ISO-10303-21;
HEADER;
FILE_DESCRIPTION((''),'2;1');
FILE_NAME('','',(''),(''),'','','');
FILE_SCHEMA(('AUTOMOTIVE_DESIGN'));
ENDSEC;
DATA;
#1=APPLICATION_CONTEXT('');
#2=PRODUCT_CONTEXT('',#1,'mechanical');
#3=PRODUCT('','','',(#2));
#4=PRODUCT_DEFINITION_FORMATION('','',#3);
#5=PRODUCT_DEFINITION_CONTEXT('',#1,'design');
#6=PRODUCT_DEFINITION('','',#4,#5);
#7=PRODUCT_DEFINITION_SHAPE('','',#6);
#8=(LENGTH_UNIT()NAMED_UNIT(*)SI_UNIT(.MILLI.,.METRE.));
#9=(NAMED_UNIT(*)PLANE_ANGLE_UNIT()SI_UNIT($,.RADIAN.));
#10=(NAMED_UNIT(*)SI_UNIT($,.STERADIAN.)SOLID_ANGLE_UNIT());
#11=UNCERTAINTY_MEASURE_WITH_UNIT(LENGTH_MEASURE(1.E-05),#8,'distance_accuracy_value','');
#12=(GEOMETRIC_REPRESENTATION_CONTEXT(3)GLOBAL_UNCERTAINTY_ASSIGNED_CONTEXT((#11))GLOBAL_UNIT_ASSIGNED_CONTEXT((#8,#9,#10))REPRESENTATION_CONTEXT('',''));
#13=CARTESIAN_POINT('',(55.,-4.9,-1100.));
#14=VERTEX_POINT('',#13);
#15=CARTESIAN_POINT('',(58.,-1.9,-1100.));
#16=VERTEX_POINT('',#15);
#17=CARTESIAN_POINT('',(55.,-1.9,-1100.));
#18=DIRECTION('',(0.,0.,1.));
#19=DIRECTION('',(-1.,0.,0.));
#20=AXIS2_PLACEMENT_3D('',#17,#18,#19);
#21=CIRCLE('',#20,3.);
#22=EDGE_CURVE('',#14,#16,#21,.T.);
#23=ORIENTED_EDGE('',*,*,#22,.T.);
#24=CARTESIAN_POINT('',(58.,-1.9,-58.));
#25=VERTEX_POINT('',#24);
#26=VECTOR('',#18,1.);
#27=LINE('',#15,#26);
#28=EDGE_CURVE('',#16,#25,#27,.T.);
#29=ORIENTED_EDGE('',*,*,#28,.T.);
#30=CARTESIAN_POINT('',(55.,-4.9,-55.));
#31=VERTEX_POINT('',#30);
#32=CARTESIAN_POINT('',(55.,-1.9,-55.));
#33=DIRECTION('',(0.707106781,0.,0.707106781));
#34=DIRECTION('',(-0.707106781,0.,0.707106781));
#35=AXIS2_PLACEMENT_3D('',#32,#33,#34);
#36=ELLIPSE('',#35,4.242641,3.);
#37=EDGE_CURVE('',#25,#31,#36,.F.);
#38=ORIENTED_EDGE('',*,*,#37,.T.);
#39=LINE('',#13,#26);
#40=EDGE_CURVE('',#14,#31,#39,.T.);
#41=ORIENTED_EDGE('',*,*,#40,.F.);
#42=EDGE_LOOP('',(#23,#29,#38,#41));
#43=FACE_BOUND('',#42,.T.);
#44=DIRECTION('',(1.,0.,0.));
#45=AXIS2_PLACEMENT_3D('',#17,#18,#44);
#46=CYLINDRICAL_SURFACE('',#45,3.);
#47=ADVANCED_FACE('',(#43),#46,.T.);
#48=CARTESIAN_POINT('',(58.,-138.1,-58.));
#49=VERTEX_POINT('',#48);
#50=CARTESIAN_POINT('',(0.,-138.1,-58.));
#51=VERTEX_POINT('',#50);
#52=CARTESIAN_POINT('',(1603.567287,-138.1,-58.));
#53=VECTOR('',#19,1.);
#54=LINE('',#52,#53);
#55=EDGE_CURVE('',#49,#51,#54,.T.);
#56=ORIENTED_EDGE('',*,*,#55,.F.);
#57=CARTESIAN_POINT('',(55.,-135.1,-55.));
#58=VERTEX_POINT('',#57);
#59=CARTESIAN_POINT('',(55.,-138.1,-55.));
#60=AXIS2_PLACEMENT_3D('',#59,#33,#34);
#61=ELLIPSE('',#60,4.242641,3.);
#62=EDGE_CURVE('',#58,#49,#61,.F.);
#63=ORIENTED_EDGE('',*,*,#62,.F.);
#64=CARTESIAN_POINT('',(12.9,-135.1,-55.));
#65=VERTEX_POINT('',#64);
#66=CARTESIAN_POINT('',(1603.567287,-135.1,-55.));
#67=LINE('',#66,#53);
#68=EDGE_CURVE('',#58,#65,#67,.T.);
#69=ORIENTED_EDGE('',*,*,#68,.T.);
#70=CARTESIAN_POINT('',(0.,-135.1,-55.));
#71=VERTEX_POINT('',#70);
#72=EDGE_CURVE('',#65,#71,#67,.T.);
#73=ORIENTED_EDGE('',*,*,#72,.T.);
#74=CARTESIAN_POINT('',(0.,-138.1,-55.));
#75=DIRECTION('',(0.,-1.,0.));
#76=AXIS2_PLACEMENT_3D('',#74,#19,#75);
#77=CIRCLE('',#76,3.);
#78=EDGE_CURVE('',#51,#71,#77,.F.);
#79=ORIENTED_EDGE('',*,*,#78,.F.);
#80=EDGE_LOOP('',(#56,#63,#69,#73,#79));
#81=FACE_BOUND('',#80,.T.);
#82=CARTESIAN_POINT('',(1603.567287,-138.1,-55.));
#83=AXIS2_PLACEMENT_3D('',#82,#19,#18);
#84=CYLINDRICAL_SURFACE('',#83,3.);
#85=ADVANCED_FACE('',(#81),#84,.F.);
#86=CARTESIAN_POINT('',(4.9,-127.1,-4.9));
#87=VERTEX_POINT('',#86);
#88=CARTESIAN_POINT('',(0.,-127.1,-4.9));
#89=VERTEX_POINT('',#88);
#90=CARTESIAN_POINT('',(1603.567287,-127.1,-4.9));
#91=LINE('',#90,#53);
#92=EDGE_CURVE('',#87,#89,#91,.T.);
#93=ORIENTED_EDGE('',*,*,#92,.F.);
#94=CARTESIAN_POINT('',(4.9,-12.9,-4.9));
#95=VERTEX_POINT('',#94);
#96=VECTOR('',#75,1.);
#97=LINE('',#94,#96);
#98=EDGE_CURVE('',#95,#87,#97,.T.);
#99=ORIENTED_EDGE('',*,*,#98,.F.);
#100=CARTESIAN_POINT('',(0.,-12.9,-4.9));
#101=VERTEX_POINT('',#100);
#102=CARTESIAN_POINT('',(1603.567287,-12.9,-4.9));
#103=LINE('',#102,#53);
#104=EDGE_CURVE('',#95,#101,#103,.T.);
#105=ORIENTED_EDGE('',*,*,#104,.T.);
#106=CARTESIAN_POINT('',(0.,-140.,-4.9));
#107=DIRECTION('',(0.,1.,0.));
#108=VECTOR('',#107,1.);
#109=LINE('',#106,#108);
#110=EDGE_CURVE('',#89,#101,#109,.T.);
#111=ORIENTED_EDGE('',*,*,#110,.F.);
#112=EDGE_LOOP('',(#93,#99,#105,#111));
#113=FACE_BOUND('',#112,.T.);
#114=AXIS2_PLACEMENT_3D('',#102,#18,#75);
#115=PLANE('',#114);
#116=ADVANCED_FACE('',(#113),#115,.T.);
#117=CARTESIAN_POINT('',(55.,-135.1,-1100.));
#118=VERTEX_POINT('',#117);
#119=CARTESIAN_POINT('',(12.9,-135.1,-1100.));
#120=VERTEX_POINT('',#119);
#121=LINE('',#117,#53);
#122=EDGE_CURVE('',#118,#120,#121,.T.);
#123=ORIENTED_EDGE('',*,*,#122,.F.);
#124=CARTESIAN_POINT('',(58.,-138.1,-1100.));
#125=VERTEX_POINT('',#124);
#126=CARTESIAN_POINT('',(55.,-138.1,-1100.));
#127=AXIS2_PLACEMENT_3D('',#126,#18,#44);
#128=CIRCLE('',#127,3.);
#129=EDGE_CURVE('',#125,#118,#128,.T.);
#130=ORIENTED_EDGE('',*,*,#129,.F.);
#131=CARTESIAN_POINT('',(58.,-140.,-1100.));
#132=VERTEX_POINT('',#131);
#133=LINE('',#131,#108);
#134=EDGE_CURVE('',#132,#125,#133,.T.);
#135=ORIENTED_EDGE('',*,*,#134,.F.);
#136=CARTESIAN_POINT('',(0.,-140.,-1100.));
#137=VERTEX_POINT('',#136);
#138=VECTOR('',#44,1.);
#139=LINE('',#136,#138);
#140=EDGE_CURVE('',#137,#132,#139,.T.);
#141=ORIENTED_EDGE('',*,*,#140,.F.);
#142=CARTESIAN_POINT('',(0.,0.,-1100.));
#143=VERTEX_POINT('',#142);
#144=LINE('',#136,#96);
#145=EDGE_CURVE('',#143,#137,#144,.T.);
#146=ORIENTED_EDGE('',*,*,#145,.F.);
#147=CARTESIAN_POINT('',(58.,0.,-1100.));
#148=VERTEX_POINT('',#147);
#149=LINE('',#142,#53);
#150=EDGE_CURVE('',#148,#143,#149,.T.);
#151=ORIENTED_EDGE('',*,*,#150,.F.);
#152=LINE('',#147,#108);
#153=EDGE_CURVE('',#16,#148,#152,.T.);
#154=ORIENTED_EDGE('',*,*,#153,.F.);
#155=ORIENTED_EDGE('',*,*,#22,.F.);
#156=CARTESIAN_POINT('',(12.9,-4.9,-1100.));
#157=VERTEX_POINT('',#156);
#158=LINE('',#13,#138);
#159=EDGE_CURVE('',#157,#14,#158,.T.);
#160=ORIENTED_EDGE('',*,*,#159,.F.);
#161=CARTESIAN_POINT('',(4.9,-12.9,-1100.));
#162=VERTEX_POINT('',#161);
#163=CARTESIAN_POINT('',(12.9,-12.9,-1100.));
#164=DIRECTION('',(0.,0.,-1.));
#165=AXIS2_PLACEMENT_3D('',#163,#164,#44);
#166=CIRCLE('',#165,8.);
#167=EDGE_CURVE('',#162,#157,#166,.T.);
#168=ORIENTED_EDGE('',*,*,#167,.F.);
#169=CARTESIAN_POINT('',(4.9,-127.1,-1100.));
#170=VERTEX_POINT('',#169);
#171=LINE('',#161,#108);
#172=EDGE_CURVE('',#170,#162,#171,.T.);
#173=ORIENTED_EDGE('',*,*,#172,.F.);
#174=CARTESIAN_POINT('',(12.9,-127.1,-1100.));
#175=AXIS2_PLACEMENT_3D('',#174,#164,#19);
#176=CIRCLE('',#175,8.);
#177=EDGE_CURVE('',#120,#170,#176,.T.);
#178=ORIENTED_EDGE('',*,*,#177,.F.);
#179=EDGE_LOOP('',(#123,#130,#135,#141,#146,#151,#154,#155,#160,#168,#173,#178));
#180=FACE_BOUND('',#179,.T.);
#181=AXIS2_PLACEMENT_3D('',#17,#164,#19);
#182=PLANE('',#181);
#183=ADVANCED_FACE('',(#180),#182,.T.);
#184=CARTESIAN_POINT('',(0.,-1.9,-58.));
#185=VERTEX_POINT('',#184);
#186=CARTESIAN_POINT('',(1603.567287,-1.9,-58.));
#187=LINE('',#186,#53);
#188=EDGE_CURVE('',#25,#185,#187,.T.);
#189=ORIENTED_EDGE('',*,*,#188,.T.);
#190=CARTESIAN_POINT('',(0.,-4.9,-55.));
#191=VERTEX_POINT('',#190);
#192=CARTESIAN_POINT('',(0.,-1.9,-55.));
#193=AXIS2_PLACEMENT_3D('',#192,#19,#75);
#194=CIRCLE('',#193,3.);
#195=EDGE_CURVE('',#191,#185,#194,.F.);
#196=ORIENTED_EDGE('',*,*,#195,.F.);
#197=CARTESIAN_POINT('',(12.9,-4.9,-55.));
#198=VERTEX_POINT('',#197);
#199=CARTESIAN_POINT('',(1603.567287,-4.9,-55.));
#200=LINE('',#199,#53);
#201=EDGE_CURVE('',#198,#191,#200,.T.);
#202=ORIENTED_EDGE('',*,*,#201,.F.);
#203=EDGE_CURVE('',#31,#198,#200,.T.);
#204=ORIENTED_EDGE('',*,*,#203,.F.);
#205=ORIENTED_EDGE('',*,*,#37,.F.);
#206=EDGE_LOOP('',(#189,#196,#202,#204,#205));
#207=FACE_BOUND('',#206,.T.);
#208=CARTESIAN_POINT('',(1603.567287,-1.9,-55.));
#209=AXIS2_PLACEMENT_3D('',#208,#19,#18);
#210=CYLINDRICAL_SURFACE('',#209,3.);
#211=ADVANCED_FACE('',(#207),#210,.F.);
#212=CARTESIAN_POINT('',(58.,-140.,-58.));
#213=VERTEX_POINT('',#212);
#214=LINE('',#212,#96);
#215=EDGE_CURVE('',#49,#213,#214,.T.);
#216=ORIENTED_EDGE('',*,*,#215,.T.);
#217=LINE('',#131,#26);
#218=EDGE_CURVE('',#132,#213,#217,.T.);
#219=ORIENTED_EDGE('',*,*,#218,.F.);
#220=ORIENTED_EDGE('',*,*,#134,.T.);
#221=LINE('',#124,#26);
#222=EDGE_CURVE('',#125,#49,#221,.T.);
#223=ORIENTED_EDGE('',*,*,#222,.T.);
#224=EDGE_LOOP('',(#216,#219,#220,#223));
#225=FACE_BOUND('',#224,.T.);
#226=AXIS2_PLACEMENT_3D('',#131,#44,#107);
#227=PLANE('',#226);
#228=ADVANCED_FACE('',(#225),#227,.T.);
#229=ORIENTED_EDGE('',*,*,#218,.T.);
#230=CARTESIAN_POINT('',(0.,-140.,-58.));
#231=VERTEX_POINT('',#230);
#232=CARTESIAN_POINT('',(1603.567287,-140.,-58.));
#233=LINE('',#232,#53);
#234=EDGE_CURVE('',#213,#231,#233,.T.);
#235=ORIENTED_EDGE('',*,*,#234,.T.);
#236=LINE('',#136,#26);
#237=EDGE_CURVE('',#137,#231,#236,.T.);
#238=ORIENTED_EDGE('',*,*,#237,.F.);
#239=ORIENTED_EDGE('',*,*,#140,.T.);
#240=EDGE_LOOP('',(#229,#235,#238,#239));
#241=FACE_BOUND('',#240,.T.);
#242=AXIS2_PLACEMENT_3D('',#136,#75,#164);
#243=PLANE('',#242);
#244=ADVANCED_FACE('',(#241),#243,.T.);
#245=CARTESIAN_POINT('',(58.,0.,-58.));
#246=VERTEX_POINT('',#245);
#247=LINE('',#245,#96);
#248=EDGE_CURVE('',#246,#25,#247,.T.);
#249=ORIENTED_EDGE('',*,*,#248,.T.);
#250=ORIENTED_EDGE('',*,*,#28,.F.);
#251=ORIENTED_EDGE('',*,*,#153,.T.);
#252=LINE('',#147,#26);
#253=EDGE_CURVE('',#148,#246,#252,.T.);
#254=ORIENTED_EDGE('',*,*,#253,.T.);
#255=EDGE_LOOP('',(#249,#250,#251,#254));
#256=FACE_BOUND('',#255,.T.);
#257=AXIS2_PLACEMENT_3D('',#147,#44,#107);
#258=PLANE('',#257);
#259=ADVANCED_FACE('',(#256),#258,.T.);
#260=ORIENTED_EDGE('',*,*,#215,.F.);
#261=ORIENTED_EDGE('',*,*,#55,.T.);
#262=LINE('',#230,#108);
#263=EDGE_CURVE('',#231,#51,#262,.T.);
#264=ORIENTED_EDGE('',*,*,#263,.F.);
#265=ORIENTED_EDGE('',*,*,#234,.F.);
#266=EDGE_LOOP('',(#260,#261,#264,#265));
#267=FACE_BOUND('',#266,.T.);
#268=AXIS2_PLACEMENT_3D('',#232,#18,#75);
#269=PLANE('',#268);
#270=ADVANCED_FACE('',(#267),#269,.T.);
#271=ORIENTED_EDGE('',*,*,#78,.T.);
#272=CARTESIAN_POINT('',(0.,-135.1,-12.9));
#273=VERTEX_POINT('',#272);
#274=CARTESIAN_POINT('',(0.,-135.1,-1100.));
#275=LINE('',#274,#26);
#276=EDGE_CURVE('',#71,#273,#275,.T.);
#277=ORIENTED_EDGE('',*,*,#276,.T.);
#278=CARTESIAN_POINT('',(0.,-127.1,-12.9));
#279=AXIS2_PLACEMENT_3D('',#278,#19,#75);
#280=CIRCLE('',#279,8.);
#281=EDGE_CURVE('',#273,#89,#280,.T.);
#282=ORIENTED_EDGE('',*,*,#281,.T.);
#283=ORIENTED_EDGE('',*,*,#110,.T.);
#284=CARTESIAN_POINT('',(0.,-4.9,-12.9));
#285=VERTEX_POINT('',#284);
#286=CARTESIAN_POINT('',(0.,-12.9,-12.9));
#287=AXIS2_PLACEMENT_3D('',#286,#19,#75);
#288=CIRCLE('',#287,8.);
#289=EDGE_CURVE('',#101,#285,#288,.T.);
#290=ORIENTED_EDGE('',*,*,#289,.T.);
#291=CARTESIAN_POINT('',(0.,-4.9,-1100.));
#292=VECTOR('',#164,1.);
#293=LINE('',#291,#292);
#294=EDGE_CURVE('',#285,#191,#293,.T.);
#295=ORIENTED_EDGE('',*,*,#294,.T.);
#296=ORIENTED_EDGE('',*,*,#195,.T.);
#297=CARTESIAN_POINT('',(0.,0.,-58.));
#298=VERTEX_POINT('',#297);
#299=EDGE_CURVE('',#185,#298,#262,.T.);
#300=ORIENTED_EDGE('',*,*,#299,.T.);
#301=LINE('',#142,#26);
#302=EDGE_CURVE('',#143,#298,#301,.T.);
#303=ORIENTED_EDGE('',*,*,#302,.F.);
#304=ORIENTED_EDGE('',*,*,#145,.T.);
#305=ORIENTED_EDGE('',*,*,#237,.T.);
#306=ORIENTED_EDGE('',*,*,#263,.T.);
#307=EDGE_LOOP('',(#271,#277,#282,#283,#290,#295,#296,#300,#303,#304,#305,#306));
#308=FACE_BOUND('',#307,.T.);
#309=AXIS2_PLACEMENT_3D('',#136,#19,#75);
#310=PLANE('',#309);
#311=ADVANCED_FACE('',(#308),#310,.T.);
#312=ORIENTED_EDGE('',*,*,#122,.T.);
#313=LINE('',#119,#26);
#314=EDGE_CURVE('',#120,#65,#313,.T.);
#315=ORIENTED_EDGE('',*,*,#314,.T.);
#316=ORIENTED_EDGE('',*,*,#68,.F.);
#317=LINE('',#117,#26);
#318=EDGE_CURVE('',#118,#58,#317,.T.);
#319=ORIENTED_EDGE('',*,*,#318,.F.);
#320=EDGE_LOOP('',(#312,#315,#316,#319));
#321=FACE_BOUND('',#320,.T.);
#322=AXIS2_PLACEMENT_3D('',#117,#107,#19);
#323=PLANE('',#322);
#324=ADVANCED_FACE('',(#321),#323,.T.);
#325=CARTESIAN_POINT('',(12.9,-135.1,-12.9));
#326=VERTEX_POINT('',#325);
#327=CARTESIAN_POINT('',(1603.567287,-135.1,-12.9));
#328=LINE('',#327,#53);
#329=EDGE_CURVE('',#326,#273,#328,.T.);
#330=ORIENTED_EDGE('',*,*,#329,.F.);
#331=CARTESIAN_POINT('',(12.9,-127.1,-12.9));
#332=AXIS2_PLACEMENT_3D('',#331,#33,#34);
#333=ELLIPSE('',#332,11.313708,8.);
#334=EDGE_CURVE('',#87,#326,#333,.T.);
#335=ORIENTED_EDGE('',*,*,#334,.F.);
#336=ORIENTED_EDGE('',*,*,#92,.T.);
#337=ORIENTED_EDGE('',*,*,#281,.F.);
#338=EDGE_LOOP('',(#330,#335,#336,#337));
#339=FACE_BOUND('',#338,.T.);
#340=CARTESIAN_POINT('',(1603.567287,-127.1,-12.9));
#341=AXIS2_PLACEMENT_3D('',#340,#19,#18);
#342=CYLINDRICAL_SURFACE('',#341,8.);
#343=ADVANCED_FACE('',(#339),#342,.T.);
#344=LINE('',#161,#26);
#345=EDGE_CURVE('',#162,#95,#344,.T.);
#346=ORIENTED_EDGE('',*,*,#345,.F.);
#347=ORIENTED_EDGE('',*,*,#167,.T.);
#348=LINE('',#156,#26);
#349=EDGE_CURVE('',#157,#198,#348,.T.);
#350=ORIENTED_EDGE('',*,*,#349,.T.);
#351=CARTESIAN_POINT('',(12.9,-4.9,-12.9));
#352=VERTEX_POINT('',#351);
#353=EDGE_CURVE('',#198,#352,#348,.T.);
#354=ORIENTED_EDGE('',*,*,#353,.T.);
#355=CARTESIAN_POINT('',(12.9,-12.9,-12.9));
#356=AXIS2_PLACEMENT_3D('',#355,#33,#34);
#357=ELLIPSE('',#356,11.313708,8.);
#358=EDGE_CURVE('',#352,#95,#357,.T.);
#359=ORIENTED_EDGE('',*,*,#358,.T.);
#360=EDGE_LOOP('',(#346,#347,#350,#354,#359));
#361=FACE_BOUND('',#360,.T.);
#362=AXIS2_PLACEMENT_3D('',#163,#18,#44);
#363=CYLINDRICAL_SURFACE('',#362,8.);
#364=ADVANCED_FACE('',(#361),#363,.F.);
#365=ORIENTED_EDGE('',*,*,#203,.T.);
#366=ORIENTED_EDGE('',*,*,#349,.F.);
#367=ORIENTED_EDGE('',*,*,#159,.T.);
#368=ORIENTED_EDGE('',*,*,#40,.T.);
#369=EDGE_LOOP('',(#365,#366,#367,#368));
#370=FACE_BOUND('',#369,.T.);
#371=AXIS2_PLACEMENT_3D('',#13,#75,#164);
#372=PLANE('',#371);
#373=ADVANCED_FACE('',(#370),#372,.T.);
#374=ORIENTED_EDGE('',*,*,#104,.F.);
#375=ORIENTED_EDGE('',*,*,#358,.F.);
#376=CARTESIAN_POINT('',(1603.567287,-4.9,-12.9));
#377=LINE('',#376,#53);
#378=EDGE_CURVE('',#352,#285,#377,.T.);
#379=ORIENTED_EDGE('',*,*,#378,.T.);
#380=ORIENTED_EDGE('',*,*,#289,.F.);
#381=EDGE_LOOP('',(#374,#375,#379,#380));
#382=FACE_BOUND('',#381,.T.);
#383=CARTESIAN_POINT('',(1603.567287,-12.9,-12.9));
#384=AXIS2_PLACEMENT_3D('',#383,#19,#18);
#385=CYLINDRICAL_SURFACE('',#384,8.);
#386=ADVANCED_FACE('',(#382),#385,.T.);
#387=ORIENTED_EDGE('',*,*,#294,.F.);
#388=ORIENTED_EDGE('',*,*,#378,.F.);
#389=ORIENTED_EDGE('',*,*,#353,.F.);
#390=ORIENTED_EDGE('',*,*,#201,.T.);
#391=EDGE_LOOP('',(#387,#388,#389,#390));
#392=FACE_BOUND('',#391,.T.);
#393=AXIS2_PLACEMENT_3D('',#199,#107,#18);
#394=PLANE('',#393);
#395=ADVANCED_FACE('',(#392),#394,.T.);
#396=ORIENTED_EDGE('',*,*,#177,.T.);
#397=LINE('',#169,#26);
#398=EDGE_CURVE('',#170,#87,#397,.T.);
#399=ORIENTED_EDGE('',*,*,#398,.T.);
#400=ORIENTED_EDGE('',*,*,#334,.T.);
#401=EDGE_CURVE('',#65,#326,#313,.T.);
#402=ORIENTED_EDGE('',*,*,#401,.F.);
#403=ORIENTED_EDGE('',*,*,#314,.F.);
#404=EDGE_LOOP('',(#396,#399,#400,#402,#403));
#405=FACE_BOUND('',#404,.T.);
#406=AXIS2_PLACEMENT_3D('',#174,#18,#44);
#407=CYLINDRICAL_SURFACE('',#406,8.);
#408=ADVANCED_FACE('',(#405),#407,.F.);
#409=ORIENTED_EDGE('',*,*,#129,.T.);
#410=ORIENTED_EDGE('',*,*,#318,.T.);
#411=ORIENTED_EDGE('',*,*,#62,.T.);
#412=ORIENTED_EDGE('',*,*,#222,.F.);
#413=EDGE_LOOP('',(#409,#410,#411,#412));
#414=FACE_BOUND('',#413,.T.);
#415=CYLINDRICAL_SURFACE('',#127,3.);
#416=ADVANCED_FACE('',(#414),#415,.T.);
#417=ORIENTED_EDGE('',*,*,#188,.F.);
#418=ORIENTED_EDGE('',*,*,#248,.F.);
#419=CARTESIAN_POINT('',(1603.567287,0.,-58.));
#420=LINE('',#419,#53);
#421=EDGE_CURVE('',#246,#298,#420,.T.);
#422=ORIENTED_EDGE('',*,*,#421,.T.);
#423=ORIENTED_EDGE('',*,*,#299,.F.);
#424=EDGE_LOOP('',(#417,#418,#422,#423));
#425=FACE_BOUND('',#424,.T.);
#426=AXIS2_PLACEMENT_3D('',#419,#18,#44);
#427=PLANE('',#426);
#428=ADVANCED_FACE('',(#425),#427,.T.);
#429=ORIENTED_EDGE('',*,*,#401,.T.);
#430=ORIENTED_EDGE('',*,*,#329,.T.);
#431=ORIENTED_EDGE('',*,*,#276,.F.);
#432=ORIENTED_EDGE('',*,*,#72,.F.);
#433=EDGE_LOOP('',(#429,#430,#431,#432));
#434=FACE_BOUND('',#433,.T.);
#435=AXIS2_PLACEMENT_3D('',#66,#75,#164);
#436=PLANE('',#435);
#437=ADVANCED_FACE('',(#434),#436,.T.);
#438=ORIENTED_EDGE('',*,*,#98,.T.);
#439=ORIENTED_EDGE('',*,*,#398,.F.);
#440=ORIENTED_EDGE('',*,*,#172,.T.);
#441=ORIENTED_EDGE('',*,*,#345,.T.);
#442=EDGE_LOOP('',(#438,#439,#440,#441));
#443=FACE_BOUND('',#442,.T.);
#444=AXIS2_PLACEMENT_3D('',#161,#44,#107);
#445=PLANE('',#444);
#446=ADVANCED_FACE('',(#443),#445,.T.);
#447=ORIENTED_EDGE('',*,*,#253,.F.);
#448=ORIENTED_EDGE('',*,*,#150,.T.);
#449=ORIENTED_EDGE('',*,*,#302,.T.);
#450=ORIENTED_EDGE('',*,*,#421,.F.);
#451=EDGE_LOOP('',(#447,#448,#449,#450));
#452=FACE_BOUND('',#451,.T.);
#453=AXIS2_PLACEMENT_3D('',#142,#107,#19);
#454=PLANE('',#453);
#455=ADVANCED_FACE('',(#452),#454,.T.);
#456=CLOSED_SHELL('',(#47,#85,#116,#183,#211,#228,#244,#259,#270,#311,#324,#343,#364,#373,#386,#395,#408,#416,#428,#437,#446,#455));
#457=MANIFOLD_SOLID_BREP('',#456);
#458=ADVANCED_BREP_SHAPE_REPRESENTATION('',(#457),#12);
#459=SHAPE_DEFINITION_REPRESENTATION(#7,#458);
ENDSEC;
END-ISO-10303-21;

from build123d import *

# Parameters (mm, degrees)
EXTRUDE_1_DEPTH = 1100
OTHER_1_DEPTH   = 58


# Read off the part's stored shape, not the designer's step: Полость1
with BuildPart() as part:
    # Эскиз1 → Бобышка-Вытянуть1 (new body)
    with BuildSketch(Plane.XY):
        with BuildLine():
            Line((0, -140), (0, 0))
            Line((0, 0), (58, 0))
            Line((58, 0), (58, -1.9))
            ThreePointArc((58, -1.9), (57.121320344, -4.021320344), (55, -4.9))
            Line((55, -4.9), (12.9, -4.9))
            ThreePointArc((12.9, -4.9), (7.243145751, -7.243145751), (4.9, -12.9))
            Line((4.9, -12.9), (4.9, -127.1))
            ThreePointArc((4.9, -127.1), (7.243145751, -132.756854249), (12.9, -135.1))
            Line((12.9, -135.1), (55, -135.1))
            ThreePointArc((55, -135.1), (57.121320344, -135.978679656), (58, -138.1))
            Line((58, -138.1), (58, -140))
            Line((58, -140), (0, -140))
        make_face()
    extrude(amount=-EXTRUDE_1_DEPTH)

    # Полость1 outline → Полость1 (cut)
    with BuildSketch(Plane.YZ):
        with BuildLine():
            Line((-140, 0), (-140, -58))
            Line((-140, -58), (-138.1, -58))
            ThreePointArc((-138.1, -58), (-135.978679656, -57.121320344), (-135.1, -55))
            Line((-135.1, -55), (-135.1, -12.9))
            ThreePointArc((-135.1, -12.9), (-132.756854249, -7.243145751), (-127.1, -4.9))
            Line((-127.1, -4.9), (-12.9, -4.9))
            ThreePointArc((-12.9, -4.9), (-7.243145751, -7.243145751), (-4.9, -12.9))
            Line((-4.9, -12.9), (-4.9, -55))
            ThreePointArc((-4.9, -55), (-4.021320344, -57.121320344), (-1.9, -58))
            Line((-1.9, -58), (0, -58))
            Line((0, -58), (0, 0))
            Line((0, 0), (-140, 0))
        make_face()
    extrude(amount=OTHER_1_DEPTH, mode=Mode.SUBTRACT)


solid = part.part
